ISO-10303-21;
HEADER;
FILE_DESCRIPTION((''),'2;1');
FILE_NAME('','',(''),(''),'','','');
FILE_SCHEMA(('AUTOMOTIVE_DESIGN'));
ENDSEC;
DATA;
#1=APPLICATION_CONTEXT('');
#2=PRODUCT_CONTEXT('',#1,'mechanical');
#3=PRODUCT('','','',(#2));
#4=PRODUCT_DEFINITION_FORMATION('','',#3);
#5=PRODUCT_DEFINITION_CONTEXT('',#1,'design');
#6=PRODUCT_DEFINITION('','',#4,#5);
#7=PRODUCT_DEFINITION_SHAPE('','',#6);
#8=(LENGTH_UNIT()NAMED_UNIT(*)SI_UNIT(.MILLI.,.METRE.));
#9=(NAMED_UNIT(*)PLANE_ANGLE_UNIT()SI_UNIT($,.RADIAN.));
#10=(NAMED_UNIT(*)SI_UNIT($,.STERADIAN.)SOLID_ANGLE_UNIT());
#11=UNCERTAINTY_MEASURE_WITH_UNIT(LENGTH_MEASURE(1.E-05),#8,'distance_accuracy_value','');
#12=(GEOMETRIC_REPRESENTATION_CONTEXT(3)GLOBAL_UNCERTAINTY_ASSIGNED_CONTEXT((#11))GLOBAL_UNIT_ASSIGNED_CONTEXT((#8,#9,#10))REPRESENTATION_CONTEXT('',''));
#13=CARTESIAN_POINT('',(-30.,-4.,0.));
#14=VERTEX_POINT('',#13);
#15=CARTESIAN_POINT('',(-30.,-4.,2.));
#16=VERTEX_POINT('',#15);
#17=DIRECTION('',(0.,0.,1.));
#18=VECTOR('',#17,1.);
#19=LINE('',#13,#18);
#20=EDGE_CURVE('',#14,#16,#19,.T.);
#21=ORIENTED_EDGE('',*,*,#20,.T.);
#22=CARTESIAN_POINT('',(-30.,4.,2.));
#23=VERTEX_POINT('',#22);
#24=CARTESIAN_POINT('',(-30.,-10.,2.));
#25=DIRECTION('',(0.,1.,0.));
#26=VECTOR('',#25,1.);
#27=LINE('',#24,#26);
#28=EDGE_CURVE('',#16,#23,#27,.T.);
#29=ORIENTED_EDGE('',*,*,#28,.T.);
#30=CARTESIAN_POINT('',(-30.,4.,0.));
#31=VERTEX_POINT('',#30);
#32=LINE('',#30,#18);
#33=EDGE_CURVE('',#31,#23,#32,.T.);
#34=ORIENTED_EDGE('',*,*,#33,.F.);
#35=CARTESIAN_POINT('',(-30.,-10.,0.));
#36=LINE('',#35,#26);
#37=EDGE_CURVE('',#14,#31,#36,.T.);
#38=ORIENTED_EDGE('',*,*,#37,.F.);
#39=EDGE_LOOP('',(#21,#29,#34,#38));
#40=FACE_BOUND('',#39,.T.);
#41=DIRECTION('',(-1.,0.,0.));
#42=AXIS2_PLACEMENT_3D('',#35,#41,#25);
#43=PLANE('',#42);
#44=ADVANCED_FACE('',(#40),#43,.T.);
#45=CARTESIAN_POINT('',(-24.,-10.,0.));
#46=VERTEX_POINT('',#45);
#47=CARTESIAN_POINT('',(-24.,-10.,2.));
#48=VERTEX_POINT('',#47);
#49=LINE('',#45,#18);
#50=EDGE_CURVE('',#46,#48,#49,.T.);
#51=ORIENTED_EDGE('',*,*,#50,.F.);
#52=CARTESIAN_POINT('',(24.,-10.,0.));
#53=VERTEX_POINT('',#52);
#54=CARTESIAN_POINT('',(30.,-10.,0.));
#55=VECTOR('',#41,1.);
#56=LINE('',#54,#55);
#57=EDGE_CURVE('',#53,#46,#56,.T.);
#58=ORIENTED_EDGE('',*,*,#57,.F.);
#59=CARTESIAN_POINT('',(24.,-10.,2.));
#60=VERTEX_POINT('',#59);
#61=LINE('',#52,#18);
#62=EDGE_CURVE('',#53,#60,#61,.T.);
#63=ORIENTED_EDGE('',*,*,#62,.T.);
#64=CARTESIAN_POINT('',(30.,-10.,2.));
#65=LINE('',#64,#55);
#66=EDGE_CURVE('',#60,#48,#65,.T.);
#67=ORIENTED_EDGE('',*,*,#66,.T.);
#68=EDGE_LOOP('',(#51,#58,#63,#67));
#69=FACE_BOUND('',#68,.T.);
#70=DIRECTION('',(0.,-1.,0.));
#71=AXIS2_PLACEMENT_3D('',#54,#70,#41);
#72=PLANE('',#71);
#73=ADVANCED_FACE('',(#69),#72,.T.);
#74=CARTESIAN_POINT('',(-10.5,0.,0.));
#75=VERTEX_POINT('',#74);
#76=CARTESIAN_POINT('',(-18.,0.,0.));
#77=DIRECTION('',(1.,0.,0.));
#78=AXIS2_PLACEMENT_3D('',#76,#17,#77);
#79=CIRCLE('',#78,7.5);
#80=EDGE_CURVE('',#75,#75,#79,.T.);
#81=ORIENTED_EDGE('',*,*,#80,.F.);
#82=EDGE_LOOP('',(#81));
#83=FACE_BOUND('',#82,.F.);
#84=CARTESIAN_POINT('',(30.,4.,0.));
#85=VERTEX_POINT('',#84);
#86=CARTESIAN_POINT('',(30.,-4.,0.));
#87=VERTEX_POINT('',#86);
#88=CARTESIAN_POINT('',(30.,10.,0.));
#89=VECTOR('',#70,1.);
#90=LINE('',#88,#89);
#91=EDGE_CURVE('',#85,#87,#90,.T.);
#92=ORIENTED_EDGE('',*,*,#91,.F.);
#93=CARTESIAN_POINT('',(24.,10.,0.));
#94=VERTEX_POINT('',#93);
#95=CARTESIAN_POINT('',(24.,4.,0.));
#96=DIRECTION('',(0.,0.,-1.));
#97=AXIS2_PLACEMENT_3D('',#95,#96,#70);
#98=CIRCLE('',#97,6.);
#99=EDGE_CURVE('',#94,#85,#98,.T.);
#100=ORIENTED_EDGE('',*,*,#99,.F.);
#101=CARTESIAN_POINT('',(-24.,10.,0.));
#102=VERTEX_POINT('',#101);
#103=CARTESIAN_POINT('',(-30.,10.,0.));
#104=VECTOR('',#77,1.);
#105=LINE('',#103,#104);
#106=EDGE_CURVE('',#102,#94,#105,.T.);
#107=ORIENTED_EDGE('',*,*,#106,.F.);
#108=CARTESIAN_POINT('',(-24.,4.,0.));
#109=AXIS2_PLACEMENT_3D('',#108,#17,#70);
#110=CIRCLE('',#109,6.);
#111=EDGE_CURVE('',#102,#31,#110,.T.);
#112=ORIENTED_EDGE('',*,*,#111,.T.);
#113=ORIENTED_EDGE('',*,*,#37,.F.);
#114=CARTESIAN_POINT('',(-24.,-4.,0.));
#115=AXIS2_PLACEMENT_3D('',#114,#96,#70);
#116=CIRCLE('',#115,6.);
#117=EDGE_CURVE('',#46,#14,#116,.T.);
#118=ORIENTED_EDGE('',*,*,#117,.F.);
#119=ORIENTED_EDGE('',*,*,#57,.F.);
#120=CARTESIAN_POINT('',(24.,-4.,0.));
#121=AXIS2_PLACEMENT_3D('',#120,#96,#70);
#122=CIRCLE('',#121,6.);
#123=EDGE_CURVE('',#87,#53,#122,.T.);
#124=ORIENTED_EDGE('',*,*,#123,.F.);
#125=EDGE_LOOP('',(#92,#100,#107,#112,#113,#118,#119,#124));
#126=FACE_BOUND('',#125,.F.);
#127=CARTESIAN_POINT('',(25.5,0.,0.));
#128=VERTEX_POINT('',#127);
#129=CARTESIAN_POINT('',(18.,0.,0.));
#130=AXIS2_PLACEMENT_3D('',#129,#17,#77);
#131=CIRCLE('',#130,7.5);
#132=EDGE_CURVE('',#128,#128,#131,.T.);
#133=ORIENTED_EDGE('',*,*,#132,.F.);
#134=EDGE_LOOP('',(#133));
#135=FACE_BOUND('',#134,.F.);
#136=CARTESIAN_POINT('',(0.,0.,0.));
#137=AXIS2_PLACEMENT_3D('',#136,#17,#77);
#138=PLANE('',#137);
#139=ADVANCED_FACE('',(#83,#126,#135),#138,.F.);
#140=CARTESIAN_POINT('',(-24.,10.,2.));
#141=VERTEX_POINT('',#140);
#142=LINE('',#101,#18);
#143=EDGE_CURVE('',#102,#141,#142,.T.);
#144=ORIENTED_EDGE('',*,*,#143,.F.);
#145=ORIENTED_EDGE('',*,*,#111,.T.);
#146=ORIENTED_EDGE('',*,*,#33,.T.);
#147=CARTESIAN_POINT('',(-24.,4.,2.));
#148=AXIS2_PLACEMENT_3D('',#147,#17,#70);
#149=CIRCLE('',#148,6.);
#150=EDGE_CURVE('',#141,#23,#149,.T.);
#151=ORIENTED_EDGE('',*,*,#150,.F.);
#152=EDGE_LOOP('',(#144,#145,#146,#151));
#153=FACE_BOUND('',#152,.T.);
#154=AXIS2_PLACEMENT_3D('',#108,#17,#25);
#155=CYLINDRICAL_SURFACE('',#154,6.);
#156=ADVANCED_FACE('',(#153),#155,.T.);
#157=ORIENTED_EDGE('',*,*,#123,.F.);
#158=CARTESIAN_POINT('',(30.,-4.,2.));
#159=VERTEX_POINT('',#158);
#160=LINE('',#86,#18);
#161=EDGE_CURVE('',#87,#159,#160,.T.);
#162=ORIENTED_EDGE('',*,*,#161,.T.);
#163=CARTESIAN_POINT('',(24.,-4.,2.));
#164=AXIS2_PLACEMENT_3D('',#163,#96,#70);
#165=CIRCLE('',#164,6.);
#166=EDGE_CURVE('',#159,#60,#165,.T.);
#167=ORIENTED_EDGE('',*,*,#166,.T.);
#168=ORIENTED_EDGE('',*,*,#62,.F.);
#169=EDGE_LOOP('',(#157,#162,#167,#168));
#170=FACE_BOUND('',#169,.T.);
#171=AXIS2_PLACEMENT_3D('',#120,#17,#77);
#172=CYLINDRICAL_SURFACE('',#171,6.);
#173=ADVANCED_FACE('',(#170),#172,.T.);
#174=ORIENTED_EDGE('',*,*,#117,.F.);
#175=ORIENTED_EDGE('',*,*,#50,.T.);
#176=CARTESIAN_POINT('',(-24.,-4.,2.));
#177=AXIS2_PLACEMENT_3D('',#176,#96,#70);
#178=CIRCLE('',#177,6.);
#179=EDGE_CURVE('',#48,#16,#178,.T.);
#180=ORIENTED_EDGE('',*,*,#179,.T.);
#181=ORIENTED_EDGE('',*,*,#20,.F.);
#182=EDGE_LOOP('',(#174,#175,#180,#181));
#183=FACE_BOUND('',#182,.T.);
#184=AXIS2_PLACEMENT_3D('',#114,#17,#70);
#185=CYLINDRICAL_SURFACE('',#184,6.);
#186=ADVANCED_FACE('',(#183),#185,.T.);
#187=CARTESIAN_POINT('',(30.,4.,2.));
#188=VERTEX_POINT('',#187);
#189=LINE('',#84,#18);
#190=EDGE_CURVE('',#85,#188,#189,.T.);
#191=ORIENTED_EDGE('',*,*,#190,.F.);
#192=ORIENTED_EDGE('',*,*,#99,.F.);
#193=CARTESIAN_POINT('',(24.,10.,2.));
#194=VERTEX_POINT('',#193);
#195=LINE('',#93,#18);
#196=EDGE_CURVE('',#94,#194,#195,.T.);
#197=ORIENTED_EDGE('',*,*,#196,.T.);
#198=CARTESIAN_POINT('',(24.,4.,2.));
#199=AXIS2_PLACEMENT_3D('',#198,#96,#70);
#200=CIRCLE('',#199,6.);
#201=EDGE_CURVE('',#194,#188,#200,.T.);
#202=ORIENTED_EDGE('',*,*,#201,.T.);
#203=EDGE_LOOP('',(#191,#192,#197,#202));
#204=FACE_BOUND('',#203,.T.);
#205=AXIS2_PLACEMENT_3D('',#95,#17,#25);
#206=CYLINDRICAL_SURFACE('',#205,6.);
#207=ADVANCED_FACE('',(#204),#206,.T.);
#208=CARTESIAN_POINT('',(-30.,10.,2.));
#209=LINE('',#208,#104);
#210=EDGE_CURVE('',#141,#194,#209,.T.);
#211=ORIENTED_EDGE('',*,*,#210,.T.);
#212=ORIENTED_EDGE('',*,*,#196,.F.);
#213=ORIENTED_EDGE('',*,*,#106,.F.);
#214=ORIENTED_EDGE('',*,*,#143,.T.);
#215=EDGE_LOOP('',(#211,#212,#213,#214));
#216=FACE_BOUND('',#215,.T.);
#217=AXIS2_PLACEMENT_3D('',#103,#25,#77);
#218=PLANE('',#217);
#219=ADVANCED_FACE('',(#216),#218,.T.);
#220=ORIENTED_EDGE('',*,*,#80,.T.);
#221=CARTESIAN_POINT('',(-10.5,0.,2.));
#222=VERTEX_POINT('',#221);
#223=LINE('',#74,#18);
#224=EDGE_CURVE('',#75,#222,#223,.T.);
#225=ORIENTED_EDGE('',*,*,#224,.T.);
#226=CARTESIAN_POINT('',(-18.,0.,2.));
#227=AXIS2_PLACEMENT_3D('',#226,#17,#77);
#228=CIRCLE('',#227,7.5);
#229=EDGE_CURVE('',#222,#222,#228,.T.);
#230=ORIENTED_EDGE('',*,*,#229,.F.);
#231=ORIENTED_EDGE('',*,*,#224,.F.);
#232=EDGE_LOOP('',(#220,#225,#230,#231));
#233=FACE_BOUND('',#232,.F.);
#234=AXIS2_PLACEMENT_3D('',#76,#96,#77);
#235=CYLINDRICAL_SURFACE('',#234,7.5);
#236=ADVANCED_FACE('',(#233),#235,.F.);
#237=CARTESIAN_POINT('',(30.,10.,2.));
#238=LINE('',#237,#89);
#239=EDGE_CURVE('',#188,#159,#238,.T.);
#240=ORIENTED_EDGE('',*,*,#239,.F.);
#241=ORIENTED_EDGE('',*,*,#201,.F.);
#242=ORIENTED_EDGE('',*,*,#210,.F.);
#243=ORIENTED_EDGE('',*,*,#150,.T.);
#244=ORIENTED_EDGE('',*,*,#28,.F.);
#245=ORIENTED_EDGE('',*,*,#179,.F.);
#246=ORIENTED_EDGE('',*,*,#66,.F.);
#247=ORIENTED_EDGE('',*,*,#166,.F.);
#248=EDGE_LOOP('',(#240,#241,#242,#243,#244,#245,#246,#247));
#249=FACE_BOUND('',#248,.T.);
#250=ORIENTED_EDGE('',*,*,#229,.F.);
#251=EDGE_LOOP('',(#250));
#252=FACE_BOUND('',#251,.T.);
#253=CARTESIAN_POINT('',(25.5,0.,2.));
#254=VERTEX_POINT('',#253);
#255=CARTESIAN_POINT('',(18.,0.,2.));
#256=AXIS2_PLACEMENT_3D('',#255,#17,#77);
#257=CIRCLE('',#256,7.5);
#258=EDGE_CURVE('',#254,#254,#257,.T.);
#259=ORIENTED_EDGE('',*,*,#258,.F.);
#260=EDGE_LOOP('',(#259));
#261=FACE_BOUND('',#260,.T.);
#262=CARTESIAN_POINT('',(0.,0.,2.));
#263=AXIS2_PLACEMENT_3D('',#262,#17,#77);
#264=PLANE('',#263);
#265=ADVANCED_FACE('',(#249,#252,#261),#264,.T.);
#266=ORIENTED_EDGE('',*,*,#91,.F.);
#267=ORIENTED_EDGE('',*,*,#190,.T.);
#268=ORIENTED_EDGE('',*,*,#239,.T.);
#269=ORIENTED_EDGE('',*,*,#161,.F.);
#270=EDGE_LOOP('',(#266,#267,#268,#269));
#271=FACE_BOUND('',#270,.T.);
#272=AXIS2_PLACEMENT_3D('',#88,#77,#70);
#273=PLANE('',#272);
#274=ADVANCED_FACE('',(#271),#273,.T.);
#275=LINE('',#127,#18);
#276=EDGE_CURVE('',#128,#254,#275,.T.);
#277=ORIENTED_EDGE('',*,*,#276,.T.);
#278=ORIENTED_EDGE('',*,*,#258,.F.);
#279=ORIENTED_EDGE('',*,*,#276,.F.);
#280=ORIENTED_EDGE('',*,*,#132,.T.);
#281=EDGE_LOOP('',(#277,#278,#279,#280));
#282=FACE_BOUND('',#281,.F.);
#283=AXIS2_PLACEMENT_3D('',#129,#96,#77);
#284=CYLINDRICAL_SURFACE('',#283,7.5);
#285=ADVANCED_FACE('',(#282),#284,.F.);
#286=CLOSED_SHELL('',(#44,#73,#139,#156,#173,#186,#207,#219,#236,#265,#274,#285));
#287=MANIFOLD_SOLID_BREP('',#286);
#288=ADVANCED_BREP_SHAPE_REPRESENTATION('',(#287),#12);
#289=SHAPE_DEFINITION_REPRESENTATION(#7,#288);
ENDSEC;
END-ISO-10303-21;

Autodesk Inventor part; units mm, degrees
ref_plane "YZ Plane" through (0, 0, 0) normal (1, 0, 0) x (0, 1, 0)
ref_plane "XZ Plane" through (0, 0, 0) normal (0, 1, 0) x (-1, 0, 0)
ref_plane "XY Plane" through (0, 0, 0) normal (0, 0, 1) x (1, 0, 0)
sketch "Sketch1" plane through (0, 0, 0) normal (0, 0, 1) x (1, 0, 0)
  line L0 (-30, 10) -> (30, 10)
  line L1 (30, 10) -> (30, -10)
  line L2 (30, -10) -> (-30, -10)
  line L3 (-30, -10) -> (-30, 10)
  line L4 (-30, 10) -> (30, -10) construction
  line L5 (30, 10) -> (-30, -10) construction
  circle A0 centre (18, 0) radius 7.5
  circle A1 centre (-18, 0) radius 7.5
  line L6 (0, 10) -> (0, -10) construction
  point P0 (0, 0)
  point P1 (0, 0)
  dimension "d0" = 60
  dimension "d1" = 20
  dimension "d2" = 15
  dimension "d3" = 36
extrude "Plate1" add sketch "Sketch1" along normal blind 2
fillet "Corner Round1" radius 6 4 edges at (-30, 10, 1) (-30, -10, 1) (30, 10, 1) (30, -10, 1)
equation "\"d4\" = Thickness"
equation "\"BendRadius\" = Thickness"
equation "\"BendReliefWidth\" = Thickness"
equation "\"BendReliefDepth\" = 0.5 * Thickness"
equation "\"CornerReliefSize\" = 4 * Thickness"
equation "\"MinimumRemnant\" = 2 * Thickness"
equation "\"TransitionRadius\" = BendRadius"
equation "\"JacobiRadiusSize\" = BendRadius"
equation "\"GapSize\" = Thickness"
equation "\"Thickness\" = 2"
properties part number "motor pillar 2"
